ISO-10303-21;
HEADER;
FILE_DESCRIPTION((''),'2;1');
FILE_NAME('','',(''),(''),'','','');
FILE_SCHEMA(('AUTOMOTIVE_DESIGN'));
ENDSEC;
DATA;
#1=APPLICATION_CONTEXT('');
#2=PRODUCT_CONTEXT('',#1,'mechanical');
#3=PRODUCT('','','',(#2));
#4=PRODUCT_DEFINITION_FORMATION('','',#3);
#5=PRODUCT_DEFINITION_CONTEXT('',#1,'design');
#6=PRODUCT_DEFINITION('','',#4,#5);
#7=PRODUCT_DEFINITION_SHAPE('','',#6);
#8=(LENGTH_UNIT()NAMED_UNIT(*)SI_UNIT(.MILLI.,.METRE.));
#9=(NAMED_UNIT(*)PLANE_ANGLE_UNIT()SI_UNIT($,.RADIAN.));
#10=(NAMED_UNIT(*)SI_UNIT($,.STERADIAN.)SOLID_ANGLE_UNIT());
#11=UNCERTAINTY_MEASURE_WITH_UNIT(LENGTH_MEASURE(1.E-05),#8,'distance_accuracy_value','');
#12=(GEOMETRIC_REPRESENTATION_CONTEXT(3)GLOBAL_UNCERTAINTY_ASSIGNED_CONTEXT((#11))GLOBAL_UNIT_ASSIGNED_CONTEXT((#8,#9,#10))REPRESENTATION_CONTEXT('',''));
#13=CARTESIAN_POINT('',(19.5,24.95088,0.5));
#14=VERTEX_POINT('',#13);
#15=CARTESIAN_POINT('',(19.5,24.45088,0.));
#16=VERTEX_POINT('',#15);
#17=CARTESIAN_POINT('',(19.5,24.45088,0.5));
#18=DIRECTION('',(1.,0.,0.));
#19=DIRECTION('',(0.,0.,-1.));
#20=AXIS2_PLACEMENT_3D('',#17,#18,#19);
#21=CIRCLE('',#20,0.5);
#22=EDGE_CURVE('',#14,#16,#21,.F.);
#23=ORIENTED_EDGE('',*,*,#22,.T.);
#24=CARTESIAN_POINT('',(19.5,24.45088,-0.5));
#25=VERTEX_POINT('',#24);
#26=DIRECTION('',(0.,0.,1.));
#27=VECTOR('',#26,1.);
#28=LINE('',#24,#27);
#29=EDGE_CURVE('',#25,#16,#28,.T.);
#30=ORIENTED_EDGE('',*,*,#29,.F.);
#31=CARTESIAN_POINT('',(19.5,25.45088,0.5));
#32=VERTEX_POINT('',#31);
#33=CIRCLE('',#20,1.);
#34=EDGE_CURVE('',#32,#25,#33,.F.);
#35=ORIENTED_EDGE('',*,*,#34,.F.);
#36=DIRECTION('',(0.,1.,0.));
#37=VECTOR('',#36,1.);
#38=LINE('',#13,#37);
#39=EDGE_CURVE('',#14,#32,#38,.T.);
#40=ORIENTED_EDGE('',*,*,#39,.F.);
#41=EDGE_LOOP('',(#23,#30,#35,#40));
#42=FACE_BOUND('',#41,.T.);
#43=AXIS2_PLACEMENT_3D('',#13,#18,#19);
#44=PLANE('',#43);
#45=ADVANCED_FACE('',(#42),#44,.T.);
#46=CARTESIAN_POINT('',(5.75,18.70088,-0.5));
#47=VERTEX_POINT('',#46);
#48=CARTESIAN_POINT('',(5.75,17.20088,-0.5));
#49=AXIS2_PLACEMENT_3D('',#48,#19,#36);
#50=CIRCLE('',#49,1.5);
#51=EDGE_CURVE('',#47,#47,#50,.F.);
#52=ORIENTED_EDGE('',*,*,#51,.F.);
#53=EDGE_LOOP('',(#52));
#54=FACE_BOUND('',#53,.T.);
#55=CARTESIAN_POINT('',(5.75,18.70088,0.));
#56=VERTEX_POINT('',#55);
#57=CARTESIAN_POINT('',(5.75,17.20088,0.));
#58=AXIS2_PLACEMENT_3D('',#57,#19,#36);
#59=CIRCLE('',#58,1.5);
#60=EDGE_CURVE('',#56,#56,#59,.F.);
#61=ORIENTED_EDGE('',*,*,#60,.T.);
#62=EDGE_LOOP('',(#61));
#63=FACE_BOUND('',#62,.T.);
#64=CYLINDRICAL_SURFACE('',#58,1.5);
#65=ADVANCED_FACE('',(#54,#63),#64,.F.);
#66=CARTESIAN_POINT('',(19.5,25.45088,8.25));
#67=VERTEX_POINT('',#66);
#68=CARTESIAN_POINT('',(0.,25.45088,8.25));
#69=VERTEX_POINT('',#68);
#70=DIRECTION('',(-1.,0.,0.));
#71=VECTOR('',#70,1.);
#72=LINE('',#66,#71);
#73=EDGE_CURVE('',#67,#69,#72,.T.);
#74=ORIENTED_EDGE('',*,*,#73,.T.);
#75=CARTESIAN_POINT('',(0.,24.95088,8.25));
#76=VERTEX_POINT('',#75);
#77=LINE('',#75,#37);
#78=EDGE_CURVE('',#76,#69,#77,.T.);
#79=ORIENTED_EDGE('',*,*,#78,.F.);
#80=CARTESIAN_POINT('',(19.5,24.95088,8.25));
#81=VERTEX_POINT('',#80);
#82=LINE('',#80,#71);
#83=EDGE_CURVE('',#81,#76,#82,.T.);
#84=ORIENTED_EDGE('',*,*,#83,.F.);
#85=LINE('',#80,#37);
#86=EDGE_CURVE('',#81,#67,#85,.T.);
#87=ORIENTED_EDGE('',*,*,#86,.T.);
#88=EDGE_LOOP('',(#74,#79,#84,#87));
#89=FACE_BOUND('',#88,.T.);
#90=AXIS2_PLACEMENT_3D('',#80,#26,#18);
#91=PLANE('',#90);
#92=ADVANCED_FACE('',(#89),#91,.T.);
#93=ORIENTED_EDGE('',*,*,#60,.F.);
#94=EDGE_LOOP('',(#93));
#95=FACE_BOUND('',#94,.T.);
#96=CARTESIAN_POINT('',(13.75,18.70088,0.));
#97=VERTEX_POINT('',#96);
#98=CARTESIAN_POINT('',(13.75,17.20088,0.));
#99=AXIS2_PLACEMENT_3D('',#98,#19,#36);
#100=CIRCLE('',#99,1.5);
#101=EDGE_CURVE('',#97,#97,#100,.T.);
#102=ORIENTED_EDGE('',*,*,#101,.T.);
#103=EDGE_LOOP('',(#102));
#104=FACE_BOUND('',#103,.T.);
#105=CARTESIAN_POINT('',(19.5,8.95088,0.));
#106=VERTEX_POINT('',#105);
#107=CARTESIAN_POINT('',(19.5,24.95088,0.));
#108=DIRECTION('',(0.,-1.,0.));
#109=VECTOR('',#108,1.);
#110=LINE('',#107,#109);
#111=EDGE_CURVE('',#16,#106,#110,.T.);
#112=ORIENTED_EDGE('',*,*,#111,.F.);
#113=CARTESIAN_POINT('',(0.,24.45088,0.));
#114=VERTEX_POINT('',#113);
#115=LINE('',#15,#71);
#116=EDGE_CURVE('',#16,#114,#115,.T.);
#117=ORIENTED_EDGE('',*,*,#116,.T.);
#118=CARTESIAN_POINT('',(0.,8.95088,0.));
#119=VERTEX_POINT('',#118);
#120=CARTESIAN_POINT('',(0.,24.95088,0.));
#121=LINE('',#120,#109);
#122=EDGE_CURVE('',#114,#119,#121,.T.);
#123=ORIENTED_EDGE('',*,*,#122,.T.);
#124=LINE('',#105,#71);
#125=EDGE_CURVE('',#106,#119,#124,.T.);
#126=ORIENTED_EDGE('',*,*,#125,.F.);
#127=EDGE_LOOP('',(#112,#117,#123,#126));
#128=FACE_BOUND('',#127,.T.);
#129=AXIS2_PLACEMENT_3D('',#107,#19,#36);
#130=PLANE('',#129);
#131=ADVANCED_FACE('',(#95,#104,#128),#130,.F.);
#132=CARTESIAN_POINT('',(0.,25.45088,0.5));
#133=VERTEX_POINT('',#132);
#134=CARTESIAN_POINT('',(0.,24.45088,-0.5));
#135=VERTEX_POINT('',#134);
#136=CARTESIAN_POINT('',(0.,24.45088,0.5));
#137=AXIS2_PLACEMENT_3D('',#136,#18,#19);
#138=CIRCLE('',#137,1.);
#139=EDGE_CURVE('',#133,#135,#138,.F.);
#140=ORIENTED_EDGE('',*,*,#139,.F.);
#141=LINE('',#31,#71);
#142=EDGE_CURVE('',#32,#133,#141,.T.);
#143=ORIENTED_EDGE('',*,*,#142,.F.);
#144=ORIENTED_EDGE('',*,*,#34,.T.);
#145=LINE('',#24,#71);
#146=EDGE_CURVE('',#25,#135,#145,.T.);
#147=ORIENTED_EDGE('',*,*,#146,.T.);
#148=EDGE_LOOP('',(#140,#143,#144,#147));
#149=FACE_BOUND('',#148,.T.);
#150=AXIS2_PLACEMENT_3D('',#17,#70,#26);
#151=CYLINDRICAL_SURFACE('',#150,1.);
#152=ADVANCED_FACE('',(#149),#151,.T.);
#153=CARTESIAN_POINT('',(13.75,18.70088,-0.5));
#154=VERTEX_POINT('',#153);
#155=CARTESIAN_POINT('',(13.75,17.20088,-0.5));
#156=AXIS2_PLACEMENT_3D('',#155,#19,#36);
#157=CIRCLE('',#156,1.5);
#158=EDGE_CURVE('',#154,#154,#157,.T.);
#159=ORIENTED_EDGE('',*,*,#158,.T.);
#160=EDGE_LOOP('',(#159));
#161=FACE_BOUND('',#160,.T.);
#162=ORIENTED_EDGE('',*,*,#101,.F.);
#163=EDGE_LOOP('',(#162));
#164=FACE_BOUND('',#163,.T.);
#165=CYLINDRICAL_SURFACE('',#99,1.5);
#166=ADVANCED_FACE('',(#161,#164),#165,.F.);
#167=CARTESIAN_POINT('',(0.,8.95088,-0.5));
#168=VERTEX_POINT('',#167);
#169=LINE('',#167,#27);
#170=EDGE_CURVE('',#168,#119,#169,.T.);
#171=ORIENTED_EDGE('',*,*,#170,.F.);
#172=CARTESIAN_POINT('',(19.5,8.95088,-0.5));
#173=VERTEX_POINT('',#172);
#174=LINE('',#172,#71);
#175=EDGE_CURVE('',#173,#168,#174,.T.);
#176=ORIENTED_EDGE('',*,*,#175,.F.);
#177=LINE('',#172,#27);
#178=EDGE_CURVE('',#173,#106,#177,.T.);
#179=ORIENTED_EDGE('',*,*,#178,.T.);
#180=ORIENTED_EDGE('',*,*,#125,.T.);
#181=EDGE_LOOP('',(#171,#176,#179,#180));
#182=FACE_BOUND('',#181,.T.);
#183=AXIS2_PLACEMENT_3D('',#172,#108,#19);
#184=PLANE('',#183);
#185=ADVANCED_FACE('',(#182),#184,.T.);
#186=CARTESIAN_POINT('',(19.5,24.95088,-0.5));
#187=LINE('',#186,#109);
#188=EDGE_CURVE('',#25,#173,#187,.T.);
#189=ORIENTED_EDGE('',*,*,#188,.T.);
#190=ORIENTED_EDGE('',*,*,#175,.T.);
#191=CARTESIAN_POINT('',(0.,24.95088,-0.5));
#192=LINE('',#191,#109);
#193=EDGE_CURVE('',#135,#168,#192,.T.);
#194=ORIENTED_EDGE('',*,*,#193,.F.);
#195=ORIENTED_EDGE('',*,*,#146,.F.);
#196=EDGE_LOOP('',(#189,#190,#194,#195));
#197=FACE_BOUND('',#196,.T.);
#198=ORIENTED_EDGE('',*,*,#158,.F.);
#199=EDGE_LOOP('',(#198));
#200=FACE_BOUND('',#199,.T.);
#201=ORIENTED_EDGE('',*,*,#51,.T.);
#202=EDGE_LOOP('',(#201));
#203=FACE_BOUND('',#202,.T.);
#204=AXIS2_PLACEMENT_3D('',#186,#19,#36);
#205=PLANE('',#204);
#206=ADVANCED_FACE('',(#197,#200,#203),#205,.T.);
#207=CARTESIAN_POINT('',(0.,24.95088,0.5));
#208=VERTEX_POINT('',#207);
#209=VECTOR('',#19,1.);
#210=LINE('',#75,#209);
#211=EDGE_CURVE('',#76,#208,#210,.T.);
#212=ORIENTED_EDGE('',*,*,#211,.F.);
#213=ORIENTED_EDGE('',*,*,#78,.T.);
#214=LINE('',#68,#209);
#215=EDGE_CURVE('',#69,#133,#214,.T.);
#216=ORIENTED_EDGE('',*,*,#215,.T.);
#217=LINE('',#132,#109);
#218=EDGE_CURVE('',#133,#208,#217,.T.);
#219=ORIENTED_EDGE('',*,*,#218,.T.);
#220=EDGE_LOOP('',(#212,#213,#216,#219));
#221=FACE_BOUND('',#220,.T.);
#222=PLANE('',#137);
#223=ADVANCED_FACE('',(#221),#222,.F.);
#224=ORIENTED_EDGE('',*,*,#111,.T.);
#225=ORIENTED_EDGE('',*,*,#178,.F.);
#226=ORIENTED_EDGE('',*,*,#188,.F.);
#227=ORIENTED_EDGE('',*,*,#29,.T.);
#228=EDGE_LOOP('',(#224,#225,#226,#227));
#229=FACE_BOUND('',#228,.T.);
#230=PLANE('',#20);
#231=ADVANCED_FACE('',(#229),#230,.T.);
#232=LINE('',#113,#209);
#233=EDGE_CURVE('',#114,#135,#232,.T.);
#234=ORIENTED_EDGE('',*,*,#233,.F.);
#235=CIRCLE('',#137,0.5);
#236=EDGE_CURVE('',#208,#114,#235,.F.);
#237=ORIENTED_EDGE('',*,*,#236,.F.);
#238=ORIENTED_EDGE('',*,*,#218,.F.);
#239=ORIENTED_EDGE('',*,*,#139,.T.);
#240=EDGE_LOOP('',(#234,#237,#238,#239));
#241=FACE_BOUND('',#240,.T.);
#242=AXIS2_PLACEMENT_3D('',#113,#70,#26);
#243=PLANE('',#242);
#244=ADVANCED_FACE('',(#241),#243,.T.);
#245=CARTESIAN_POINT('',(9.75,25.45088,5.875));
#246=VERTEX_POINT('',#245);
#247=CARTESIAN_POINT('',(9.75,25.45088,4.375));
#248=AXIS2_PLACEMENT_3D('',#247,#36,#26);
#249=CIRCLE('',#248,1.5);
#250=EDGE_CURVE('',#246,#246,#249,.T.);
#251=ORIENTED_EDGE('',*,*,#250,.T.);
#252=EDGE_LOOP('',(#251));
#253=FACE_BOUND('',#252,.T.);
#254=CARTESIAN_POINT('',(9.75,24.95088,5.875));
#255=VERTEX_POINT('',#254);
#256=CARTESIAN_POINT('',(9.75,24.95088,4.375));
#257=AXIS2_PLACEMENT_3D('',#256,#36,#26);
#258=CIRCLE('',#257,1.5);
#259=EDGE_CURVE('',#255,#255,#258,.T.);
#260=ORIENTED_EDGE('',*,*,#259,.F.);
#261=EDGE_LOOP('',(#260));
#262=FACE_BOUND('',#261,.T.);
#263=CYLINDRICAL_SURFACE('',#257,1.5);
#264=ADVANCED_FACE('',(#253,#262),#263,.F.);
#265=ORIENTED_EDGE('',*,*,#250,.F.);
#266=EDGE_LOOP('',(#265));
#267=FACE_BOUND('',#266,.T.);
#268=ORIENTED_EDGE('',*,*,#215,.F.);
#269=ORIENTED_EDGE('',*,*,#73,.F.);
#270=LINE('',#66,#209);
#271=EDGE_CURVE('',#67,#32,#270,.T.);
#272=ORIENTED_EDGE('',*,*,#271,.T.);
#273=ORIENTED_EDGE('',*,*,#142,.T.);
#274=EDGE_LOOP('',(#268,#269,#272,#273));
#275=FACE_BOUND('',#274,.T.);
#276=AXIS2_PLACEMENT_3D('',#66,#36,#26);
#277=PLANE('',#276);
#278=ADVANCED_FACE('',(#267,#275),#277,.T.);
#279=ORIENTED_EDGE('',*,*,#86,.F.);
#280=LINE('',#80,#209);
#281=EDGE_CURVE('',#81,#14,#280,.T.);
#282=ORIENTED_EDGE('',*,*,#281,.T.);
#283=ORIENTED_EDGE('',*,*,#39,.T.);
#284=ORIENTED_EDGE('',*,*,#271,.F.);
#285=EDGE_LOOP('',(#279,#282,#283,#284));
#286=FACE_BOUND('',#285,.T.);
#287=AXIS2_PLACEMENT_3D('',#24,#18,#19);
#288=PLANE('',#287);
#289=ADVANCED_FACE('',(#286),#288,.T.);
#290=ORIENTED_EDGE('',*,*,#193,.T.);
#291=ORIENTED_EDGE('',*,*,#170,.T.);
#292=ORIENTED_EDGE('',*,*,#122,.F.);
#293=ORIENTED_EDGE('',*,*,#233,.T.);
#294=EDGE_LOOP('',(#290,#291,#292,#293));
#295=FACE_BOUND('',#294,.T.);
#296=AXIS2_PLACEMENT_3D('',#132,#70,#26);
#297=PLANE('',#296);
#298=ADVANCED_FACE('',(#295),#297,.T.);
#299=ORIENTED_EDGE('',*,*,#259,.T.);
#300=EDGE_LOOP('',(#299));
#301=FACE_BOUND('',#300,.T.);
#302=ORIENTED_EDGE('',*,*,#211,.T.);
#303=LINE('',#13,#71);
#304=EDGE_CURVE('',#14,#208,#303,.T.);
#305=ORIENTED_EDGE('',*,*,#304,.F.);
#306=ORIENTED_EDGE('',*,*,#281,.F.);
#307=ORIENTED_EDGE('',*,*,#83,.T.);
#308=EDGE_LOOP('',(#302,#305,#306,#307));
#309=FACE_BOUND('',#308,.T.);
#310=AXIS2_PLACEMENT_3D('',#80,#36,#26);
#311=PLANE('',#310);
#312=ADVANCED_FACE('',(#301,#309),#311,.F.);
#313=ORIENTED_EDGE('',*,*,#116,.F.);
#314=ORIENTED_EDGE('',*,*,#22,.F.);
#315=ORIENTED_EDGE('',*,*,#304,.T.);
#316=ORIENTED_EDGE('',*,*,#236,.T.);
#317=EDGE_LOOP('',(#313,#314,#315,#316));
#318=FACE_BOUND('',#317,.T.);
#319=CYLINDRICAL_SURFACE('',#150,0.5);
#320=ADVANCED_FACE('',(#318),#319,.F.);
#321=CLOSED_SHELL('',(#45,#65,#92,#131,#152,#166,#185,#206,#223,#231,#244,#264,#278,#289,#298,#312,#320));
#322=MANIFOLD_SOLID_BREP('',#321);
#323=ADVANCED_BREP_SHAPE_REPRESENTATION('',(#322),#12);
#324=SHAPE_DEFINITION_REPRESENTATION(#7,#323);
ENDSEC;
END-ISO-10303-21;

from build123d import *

# Parameters (mm, degrees)
BRIDA_BASE1_DEPTH     = 19.5
CROQUIS9_R            = 1.5
CORTAR_EXTRUIR4_DEPTH = 0.5
CROQUIS10_R           = 1.5
CORTAR_EXTRUIR5_DEPTH = 0.5


# Sheet-metal steps are written as plain solids
with BuildPart() as part:
    # Croquis1 → Brida base1 (new body)
    with BuildSketch(Plane(origin=(0, 0, 0), x_dir=(0, 0, -1), z_dir=(1, 0, 0))):
        with BuildLine():
            Line((-8.25, 24.950879865), (-0.5, 24.950879865))
            ThreePointArc((-0.5, 24.950879865), (-0.146446609, 24.804433255), (0, 24.450879865))
            Line((0, 24.450879865), (0, 8.950879865))
            Line((0, 8.950879865), (0.5, 8.950879865))
            Line((0.5, 8.950879865), (0.5, 24.450879865))
            ThreePointArc((0.5, 24.450879865), (0.207106781, 25.157986646), (-0.5, 25.450879865))
            Line((-0.5, 25.450879865), (-8.25, 25.450879865))
            Line((-8.25, 25.450879865), (-8.25, 24.950879865))
        make_face()
    extrude(amount=BRIDA_BASE1_DEPTH)

    # Croquis9 → Cortar-Extruir4 (cut)
    with BuildSketch(Plane(origin=(0, 0, -0.5), x_dir=(-1, 0, 0), z_dir=(0, 0, -1))):
        with Locations(Location((-13.75, 17.200879865, 0), (0, 0, 90))):
            Circle(CROQUIS9_R)
        with Locations(Location((-5.75, 17.200879865, 0), (0, 0, 90))):
            Circle(CROQUIS9_R)
    extrude(amount=-CORTAR_EXTRUIR4_DEPTH, mode=Mode.SUBTRACT)

    # Croquis10 → Cortar-Extruir5 (cut)
    with BuildSketch(Plane(origin=(0, 25.450879865, 0), x_dir=(1, 0, 0), z_dir=(0, 1, 0))):
        with Locations(Location((9.75, -4.375, 0), (0, 0, 270))):
            Circle(CROQUIS10_R)
    extrude(amount=-CORTAR_EXTRUIR5_DEPTH, mode=Mode.SUBTRACT)


solid = part.part
